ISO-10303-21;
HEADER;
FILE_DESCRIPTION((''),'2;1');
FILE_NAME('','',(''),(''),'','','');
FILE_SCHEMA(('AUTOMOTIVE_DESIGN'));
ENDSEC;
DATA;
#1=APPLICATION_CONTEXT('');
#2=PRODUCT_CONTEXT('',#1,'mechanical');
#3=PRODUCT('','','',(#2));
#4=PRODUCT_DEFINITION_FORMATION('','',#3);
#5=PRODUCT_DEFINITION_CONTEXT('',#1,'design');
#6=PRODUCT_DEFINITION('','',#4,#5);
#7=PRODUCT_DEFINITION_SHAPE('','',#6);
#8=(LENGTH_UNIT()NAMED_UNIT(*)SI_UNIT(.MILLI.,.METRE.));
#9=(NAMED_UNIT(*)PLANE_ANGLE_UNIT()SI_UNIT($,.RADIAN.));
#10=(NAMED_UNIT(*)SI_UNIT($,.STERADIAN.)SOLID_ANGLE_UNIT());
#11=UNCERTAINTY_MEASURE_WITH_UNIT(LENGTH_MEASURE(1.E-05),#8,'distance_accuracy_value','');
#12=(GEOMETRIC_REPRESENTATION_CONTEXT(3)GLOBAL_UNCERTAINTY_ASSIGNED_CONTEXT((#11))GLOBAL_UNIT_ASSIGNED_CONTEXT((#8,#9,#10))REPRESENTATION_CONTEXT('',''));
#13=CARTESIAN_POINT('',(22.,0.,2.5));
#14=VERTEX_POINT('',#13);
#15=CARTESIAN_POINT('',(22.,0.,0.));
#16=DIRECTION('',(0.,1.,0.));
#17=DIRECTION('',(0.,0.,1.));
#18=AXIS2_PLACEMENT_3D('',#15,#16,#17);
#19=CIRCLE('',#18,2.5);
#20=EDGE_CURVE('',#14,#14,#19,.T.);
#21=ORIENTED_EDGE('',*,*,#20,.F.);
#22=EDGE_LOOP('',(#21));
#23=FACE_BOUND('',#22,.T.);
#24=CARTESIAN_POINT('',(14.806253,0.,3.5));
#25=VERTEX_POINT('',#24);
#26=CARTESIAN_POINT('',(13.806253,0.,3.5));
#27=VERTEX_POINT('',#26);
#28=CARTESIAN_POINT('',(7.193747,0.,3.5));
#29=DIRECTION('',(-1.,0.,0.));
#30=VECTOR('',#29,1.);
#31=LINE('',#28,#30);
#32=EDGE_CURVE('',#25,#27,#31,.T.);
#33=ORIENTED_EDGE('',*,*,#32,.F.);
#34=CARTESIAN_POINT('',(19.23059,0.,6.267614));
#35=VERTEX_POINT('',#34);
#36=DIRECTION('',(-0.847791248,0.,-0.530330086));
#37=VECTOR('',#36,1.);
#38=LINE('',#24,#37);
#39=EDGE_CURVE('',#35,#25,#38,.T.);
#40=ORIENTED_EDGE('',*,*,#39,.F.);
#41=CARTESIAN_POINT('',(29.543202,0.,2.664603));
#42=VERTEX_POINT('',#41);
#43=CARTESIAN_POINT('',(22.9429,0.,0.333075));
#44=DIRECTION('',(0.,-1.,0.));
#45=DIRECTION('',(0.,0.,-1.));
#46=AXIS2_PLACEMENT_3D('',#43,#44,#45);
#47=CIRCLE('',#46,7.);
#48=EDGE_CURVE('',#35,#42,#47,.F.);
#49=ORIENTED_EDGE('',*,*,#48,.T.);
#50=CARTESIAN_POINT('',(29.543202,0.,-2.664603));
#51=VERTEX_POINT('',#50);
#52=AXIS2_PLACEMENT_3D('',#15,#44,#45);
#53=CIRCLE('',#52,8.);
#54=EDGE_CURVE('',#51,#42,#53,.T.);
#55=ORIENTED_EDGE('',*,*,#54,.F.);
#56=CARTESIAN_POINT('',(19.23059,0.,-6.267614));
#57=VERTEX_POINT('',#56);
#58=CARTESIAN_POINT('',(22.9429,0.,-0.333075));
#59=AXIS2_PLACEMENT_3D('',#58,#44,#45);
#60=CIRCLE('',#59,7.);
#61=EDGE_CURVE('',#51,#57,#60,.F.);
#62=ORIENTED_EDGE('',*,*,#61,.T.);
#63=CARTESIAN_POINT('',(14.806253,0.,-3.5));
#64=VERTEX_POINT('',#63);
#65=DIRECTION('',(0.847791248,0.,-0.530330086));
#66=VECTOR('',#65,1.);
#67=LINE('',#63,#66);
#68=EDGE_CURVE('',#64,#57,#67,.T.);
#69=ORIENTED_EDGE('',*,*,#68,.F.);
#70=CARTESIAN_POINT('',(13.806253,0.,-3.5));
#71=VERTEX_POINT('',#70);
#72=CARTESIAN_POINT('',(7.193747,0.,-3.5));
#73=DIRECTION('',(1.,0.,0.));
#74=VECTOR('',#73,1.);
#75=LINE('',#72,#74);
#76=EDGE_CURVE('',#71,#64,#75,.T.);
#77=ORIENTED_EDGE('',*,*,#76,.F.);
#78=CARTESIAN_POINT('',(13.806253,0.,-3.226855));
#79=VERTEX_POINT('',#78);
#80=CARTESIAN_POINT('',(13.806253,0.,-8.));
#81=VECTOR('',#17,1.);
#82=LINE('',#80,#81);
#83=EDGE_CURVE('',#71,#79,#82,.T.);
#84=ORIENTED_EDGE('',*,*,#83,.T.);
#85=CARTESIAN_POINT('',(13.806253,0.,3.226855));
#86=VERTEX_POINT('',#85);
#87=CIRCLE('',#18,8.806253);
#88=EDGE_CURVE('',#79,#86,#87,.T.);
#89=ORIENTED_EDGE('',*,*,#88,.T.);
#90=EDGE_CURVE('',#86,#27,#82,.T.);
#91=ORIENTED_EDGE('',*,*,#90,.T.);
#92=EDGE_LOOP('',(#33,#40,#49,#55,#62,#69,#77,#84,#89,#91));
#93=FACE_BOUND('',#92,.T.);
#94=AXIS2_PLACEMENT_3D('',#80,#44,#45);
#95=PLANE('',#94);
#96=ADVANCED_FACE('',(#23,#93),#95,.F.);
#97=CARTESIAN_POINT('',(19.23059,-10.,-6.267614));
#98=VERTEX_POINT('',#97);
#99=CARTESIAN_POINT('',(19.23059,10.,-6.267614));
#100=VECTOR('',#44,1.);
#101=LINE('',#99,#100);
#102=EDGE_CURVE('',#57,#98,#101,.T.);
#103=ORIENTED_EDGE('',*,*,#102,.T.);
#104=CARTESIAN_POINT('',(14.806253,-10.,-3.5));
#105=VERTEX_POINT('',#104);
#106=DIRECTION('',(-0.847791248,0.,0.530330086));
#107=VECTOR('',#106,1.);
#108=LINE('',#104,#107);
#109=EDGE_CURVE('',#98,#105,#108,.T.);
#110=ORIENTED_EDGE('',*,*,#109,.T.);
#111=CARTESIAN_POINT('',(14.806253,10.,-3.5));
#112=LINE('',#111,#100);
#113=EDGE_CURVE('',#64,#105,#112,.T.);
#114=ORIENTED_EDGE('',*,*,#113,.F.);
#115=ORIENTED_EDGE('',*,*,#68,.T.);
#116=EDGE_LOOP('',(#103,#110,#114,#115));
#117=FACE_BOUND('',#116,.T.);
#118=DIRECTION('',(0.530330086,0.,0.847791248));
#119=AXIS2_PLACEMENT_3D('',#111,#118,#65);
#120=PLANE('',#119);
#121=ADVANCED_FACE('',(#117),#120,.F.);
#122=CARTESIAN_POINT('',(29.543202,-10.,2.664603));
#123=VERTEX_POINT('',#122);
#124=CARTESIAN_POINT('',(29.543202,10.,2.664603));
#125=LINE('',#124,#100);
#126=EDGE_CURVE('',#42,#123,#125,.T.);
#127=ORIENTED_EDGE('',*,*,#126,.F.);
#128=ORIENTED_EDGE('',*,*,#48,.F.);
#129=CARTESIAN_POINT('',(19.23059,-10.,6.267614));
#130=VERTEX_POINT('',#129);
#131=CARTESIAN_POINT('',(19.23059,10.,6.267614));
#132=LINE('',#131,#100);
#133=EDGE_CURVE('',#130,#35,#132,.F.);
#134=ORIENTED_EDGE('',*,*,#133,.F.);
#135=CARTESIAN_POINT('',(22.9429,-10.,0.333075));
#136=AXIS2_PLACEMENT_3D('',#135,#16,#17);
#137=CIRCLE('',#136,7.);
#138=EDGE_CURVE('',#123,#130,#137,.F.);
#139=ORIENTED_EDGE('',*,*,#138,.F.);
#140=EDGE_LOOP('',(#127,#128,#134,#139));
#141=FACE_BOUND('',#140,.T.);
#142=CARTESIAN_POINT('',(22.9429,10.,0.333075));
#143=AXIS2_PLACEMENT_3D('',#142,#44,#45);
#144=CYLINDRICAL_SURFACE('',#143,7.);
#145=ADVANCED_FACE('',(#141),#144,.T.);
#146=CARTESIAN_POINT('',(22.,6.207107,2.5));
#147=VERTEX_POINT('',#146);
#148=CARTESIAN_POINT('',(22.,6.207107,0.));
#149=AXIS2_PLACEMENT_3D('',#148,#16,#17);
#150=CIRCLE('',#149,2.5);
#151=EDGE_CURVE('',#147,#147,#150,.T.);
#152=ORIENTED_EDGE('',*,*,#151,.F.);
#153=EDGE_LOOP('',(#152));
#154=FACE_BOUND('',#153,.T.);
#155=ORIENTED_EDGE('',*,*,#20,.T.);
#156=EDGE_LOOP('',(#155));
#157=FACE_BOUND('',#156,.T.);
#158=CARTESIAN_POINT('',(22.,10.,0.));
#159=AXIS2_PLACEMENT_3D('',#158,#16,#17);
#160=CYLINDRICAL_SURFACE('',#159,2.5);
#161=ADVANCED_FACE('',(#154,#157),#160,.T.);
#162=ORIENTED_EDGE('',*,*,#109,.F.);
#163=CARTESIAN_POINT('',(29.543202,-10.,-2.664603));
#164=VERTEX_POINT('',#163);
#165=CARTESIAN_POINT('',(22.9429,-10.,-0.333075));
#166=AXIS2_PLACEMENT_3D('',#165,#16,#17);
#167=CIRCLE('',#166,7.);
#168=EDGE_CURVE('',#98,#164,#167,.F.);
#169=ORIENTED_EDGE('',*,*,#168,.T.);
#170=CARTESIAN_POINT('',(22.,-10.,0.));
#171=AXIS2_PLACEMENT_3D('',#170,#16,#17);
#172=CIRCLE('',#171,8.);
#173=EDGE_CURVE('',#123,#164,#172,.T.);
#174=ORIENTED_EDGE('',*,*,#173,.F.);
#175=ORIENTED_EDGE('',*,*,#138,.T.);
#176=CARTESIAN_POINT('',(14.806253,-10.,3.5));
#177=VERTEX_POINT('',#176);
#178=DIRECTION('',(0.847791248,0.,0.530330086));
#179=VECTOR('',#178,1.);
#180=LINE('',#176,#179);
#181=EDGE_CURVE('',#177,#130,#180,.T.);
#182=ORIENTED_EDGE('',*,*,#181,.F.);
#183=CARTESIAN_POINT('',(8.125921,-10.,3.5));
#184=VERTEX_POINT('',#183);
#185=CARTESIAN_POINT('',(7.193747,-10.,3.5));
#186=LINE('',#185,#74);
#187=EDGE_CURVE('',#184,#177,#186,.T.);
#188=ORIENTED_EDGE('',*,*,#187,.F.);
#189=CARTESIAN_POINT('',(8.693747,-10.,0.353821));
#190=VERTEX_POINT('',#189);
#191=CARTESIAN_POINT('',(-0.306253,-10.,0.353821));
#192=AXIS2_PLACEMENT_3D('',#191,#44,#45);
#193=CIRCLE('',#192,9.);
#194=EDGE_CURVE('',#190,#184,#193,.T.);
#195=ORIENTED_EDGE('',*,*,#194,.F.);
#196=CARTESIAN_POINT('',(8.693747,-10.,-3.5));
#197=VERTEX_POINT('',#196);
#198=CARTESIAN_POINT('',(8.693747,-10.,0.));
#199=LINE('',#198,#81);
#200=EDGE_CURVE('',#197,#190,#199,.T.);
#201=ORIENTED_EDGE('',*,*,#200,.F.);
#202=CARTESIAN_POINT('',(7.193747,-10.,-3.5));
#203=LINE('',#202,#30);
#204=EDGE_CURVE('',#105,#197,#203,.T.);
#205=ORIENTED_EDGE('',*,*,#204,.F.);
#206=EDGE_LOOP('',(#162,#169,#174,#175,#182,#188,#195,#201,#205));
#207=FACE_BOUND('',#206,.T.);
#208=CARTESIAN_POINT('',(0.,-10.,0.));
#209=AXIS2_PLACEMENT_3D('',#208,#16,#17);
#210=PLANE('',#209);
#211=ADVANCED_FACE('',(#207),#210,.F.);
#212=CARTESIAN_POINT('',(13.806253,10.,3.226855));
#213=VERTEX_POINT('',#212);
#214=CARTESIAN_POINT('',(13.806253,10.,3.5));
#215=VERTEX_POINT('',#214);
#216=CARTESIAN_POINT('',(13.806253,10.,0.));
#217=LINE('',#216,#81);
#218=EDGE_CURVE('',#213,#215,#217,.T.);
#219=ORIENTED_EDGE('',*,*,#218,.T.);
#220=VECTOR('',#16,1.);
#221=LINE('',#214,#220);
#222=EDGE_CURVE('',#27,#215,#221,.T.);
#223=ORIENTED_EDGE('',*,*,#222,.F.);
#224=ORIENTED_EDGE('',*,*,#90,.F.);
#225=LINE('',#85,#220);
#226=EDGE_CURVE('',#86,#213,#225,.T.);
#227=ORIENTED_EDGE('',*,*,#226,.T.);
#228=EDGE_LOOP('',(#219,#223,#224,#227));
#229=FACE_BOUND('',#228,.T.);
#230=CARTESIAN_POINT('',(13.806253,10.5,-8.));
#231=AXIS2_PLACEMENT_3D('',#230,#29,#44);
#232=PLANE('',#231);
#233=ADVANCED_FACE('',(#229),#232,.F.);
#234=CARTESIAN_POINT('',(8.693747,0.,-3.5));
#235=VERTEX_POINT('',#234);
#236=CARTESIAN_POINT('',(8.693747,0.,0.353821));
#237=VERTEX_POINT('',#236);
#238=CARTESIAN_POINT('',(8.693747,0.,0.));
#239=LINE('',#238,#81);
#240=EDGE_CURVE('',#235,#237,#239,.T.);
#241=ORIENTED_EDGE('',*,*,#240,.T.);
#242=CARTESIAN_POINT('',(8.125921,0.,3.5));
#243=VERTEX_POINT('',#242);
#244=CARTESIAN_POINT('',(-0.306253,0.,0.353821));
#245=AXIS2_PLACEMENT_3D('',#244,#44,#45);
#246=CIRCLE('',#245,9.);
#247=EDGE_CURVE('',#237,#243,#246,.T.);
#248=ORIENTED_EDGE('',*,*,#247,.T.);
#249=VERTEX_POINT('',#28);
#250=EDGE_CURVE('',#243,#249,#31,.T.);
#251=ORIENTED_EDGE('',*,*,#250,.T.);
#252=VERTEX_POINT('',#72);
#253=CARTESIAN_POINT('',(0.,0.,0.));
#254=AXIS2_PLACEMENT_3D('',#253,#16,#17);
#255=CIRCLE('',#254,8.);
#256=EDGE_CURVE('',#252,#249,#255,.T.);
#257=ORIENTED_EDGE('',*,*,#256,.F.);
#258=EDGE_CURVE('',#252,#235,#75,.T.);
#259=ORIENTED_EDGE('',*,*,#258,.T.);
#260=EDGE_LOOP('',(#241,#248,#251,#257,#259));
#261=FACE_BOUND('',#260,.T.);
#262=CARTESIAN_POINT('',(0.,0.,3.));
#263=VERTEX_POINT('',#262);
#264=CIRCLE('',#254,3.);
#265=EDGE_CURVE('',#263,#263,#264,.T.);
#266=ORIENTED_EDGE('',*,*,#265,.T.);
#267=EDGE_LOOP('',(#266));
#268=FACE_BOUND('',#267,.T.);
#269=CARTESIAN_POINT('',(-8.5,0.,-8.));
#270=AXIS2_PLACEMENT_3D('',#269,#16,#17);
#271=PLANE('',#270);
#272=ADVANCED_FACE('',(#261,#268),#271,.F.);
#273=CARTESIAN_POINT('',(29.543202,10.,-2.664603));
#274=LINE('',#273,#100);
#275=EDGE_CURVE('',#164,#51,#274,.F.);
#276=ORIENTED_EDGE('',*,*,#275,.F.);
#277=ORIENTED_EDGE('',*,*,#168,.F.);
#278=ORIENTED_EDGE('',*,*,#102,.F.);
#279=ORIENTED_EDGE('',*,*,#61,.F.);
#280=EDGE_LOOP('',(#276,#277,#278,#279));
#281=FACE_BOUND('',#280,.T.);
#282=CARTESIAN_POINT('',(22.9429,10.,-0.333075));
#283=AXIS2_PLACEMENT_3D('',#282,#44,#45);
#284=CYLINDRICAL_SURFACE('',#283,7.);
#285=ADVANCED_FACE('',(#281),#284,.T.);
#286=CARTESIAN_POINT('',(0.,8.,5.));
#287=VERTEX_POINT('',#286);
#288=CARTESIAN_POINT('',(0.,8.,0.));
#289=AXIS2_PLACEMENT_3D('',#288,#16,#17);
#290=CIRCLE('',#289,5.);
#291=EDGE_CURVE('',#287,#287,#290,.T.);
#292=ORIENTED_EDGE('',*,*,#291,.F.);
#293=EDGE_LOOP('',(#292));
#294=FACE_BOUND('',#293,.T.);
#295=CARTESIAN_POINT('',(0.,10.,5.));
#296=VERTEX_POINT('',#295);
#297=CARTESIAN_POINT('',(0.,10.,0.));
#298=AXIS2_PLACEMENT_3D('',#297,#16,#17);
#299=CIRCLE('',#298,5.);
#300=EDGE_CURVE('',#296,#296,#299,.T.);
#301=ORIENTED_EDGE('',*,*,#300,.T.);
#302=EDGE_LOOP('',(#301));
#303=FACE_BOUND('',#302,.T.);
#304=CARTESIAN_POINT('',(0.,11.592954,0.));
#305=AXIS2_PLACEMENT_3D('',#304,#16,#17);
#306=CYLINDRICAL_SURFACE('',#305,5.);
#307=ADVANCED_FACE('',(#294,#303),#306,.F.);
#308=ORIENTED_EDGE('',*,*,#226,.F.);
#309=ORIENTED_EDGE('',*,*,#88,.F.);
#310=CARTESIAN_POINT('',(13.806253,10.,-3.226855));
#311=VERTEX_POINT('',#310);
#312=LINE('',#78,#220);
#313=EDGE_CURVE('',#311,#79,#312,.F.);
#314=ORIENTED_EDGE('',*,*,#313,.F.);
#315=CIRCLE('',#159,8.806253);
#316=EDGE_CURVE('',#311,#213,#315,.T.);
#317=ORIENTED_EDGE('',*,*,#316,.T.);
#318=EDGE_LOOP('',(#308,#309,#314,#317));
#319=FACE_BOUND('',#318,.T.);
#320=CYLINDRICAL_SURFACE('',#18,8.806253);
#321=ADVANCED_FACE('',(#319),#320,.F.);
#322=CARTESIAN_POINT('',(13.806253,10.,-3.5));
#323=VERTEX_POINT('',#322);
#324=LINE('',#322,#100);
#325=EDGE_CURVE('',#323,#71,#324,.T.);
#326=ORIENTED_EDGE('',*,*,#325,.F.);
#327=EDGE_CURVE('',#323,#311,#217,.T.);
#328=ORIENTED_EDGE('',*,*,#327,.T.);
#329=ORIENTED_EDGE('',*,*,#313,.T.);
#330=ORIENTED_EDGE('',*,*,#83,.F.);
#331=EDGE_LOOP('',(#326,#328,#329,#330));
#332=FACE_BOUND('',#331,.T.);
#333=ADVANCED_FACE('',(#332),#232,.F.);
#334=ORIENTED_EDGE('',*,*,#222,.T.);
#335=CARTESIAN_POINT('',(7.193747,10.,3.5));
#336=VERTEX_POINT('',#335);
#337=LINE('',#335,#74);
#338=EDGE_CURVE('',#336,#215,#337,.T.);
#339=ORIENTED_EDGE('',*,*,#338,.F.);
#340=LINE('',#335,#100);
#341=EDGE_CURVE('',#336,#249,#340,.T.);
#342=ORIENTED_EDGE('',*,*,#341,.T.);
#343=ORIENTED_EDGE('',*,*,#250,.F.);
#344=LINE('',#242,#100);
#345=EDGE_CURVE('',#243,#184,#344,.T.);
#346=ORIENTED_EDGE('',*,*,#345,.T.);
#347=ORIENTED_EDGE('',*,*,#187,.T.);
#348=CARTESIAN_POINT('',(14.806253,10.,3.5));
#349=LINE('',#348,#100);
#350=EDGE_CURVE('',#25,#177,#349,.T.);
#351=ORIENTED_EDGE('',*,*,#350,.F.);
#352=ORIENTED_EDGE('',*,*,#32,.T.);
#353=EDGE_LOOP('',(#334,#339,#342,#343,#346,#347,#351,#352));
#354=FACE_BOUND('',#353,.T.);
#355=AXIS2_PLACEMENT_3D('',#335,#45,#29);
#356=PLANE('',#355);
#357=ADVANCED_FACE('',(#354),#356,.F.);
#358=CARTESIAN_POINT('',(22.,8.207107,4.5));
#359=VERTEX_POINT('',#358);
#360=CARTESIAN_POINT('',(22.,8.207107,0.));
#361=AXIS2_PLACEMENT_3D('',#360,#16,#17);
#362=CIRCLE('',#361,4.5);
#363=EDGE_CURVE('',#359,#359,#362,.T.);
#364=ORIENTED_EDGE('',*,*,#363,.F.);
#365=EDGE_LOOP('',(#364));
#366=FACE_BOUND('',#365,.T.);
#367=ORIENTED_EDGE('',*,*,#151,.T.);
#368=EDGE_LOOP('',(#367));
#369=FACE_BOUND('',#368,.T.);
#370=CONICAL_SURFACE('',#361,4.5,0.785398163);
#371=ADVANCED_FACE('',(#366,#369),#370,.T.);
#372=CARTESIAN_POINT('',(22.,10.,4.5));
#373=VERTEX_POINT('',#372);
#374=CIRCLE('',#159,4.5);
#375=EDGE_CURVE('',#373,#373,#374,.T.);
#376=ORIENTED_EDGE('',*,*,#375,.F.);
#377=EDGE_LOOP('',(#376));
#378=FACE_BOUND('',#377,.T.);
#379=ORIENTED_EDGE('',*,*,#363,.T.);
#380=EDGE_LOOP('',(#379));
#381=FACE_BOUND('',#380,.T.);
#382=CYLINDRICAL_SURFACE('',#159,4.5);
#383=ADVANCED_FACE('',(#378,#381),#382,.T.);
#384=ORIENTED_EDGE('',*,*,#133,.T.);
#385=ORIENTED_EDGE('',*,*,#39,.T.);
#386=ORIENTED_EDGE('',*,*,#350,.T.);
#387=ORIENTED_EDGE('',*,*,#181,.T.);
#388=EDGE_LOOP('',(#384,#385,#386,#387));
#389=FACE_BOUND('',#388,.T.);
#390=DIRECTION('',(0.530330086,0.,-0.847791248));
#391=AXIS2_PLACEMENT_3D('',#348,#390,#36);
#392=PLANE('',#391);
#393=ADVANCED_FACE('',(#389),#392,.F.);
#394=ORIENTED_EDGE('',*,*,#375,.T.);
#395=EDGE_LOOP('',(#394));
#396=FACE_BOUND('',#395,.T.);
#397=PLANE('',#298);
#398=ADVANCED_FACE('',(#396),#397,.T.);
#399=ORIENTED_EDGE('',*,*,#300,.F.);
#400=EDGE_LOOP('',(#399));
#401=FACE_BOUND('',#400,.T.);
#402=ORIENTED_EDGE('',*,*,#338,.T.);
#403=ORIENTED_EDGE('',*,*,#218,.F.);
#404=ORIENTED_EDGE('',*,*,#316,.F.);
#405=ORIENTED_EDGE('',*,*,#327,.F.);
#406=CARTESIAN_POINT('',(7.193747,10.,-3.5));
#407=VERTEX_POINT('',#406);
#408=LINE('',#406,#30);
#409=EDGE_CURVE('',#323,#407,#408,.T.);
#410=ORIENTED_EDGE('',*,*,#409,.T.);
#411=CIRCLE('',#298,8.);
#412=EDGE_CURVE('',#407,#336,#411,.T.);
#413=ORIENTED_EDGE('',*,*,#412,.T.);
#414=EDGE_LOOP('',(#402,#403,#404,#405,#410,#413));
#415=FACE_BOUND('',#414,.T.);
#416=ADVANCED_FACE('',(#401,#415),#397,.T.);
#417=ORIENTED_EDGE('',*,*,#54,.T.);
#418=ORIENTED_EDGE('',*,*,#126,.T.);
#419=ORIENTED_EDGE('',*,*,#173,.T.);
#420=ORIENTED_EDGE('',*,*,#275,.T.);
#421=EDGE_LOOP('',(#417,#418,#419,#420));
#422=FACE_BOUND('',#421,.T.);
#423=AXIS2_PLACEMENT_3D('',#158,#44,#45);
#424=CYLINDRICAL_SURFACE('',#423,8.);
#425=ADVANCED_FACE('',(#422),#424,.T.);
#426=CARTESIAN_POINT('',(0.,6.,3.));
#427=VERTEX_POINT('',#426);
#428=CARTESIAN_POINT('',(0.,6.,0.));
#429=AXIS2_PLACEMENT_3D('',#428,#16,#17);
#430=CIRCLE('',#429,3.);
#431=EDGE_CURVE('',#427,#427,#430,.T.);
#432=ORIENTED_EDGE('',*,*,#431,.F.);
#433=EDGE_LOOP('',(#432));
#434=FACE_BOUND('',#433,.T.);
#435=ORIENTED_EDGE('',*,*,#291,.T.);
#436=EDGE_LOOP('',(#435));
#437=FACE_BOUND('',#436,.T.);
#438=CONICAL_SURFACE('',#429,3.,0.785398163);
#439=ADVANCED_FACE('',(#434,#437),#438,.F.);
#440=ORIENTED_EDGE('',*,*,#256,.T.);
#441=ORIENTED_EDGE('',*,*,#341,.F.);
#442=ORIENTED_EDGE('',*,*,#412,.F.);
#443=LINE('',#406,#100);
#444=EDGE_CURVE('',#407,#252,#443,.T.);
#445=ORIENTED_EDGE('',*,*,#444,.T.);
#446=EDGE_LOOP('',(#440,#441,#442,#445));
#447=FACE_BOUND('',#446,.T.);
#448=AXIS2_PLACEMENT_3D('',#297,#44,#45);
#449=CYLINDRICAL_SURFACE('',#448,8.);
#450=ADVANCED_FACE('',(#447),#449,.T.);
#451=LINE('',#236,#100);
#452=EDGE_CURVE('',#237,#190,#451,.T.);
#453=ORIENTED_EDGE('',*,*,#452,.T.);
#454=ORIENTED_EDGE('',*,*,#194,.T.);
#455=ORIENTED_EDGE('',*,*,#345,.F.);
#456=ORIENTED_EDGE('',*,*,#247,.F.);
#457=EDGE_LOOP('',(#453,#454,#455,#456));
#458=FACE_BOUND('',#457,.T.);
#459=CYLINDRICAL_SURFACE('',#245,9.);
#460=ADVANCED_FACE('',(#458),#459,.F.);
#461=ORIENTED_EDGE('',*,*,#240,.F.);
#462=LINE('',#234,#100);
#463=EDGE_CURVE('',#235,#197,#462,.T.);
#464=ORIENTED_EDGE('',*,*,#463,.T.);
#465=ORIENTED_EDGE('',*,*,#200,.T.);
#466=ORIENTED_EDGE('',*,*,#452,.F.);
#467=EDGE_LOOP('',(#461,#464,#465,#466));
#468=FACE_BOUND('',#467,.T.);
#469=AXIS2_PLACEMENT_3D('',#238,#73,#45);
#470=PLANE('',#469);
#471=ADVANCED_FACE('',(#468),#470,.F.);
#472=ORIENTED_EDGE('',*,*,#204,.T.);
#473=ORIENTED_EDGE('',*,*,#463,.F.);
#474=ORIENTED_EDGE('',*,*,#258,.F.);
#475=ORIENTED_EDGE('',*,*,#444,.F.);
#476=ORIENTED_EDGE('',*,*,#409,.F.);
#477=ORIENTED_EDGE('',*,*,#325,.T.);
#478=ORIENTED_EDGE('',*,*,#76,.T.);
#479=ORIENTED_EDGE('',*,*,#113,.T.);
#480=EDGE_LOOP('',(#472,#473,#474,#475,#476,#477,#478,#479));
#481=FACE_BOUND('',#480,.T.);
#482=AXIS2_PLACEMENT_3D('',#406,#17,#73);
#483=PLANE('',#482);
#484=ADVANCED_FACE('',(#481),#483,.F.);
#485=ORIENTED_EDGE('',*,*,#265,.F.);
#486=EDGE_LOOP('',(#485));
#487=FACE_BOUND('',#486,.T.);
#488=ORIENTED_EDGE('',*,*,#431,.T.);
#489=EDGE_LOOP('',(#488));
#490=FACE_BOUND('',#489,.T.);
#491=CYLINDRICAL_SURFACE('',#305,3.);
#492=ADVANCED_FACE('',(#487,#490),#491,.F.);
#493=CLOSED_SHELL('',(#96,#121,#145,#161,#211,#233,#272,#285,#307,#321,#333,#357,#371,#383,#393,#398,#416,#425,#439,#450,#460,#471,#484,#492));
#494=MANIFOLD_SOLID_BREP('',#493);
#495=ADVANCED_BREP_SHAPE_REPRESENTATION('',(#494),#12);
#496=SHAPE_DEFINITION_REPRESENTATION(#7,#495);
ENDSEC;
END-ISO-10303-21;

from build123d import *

# Parameters (mm, degrees)
SKETCH3_R               = 8
BOSS_EXTRUDE1_DEPTH     = 10
BOSS_EXTRUDE2_DEPTH     = 10
CUT_EXTRUDE1_DEPTH      = 34.648922717
CUT_EXTRUDE1_DEPTH_BACK = 34.648922717
SKETCH7_W               = 15.693747285
SKETCH7_H               = 10.5
SKETCH7_W_2             = 16.693747285
SKETCH13_R              = 8.806252715
SKETCH13_R_2            = 4.5
CUT_EXTRUDE2_DEPTH      = 10
FILLET1_R               = 7
CUT_EXTRUDE3_DEPTH      = 10


# Read off the part's stored shape, not the designer's step: Revolve1
with BuildPart() as part:
    # Sketch3 → Boss-Extrude1 (new, symmetric)
    with BuildSketch(Plane(origin=(0, 0, 0), x_dir=(1, 0, 0), z_dir=(0, 1, 0))):
        with Locations(Location((0, 0, 0), (0, 0, 270))):
            Circle(SKETCH3_R)
    extrude(amount=BOSS_EXTRUDE1_DEPTH, both=True)

    # Sketch6 → Boss-Extrude2 (add, symmetric)
    with BuildSketch(Plane(origin=(0, 0, 0), x_dir=(1, 0, 0), z_dir=(0, 1, 0))):
        with BuildLine():
            Line((7.193747285, -3.5), (14.806252715, -3.5))
            Line((14.806252715, -3.5), (22, -8))
            ThreePointArc((22, -8), (30, 0), (22, 8))
            Line((22, 8), (14.806252715, 3.5))
            Line((14.806252715, 3.5), (7.193747285, 3.5))
            ThreePointArc((7.193747285, 3.5), (8, 0), (7.193747285, -3.5))
        make_face()
    extrude(amount=BOSS_EXTRUDE2_DEPTH, both=True)

    # Sketch7 → Cut-Extrude1 (cut, two sides: drawn at the far end of the back side and taken through both)
    with BuildSketch(Plane.XY.offset(3.5).offset(-CUT_EXTRUDE1_DEPTH_BACK)):
        with Locations((-0.653126357, -5.25)):
            Rectangle(SKETCH7_W, SKETCH7_H)
        with Locations((22.153126358, 5.25)):
            Rectangle(SKETCH7_W_2, SKETCH7_H)
    extrude(amount=CUT_EXTRUDE1_DEPTH + CUT_EXTRUDE1_DEPTH_BACK, mode=Mode.SUBTRACT)

    # Sketch8 → Cut-Revolve2 (revolve, cut)
    with BuildSketch(Plane.XY, mode=Mode.PRIVATE) as cut_revolve2_sk:
        Polygon((0, 10), (0, 0), (3, 0), (3, 6), (5, 8), (5, 10), align=None)
    revolve(cut_revolve2_sk.sketch.rotate(Axis((0, 11.592954006, 0), (0, -1, 0)), 90), axis=Axis((0, 11.592954006, 0), (0, -1, 0)), mode=Mode.SUBTRACT)

    # Revolve1 outline → Revolve1 (revolve)
    with BuildSketch(Plane(origin=(22, 0, 0), x_dir=(1, 0, 0), z_dir=(0, 0, 1))):
        Polygon((0, 10), (0, 0), (2.5, 0), (2.5, 6.207106781), (4.5, 8.207106781), (4.5, 10), align=None)
    revolve(axis=Axis((22, 0, 0), (0, 1, 0)))

    # Sketch13 → Cut-Extrude2 (cut)
    with BuildSketch(Plane(origin=(0, 10, 0), x_dir=(1, 0, 0), z_dir=(0, 1, 0))):
        with Locations((22, 0)):
            Circle(SKETCH13_R)
        with Locations(Location((22, 0, 0), (0, 0, 270))):
            Circle(SKETCH13_R_2, mode=Mode.SUBTRACT)
    extrude(amount=-CUT_EXTRUDE2_DEPTH, mode=Mode.SUBTRACT)

    # Fillet1
    fillet1_edges = [part.edges().sort_by_distance(p)[0] for p in [
        (22, -5, -8),
        (22, -5, 8),
    ]]
    fillet(fillet1_edges, radius=FILLET1_R)

    # Sketch14 → Cut-Extrude3 (cut)
    with BuildSketch(Plane.XZ.offset(10)):
        with BuildLine():
            Line((8.693747285, -3.5), (8.693747285, 0.353821083))
            ThreePointArc((8.693747285, 0.353821083), (6.057708316, 6.717782114), (-0.306252715, 9.353821083))
            Line((-0.306252715, 9.353821083), (-1.238376204, 9.353821083))
            ThreePointArc((-1.238376204, 9.353821083), (-36.061646902, -27.818232152), (8.693747285, -3.5))
        make_face()
    extrude(amount=-CUT_EXTRUDE3_DEPTH, mode=Mode.SUBTRACT)


solid = part.part
